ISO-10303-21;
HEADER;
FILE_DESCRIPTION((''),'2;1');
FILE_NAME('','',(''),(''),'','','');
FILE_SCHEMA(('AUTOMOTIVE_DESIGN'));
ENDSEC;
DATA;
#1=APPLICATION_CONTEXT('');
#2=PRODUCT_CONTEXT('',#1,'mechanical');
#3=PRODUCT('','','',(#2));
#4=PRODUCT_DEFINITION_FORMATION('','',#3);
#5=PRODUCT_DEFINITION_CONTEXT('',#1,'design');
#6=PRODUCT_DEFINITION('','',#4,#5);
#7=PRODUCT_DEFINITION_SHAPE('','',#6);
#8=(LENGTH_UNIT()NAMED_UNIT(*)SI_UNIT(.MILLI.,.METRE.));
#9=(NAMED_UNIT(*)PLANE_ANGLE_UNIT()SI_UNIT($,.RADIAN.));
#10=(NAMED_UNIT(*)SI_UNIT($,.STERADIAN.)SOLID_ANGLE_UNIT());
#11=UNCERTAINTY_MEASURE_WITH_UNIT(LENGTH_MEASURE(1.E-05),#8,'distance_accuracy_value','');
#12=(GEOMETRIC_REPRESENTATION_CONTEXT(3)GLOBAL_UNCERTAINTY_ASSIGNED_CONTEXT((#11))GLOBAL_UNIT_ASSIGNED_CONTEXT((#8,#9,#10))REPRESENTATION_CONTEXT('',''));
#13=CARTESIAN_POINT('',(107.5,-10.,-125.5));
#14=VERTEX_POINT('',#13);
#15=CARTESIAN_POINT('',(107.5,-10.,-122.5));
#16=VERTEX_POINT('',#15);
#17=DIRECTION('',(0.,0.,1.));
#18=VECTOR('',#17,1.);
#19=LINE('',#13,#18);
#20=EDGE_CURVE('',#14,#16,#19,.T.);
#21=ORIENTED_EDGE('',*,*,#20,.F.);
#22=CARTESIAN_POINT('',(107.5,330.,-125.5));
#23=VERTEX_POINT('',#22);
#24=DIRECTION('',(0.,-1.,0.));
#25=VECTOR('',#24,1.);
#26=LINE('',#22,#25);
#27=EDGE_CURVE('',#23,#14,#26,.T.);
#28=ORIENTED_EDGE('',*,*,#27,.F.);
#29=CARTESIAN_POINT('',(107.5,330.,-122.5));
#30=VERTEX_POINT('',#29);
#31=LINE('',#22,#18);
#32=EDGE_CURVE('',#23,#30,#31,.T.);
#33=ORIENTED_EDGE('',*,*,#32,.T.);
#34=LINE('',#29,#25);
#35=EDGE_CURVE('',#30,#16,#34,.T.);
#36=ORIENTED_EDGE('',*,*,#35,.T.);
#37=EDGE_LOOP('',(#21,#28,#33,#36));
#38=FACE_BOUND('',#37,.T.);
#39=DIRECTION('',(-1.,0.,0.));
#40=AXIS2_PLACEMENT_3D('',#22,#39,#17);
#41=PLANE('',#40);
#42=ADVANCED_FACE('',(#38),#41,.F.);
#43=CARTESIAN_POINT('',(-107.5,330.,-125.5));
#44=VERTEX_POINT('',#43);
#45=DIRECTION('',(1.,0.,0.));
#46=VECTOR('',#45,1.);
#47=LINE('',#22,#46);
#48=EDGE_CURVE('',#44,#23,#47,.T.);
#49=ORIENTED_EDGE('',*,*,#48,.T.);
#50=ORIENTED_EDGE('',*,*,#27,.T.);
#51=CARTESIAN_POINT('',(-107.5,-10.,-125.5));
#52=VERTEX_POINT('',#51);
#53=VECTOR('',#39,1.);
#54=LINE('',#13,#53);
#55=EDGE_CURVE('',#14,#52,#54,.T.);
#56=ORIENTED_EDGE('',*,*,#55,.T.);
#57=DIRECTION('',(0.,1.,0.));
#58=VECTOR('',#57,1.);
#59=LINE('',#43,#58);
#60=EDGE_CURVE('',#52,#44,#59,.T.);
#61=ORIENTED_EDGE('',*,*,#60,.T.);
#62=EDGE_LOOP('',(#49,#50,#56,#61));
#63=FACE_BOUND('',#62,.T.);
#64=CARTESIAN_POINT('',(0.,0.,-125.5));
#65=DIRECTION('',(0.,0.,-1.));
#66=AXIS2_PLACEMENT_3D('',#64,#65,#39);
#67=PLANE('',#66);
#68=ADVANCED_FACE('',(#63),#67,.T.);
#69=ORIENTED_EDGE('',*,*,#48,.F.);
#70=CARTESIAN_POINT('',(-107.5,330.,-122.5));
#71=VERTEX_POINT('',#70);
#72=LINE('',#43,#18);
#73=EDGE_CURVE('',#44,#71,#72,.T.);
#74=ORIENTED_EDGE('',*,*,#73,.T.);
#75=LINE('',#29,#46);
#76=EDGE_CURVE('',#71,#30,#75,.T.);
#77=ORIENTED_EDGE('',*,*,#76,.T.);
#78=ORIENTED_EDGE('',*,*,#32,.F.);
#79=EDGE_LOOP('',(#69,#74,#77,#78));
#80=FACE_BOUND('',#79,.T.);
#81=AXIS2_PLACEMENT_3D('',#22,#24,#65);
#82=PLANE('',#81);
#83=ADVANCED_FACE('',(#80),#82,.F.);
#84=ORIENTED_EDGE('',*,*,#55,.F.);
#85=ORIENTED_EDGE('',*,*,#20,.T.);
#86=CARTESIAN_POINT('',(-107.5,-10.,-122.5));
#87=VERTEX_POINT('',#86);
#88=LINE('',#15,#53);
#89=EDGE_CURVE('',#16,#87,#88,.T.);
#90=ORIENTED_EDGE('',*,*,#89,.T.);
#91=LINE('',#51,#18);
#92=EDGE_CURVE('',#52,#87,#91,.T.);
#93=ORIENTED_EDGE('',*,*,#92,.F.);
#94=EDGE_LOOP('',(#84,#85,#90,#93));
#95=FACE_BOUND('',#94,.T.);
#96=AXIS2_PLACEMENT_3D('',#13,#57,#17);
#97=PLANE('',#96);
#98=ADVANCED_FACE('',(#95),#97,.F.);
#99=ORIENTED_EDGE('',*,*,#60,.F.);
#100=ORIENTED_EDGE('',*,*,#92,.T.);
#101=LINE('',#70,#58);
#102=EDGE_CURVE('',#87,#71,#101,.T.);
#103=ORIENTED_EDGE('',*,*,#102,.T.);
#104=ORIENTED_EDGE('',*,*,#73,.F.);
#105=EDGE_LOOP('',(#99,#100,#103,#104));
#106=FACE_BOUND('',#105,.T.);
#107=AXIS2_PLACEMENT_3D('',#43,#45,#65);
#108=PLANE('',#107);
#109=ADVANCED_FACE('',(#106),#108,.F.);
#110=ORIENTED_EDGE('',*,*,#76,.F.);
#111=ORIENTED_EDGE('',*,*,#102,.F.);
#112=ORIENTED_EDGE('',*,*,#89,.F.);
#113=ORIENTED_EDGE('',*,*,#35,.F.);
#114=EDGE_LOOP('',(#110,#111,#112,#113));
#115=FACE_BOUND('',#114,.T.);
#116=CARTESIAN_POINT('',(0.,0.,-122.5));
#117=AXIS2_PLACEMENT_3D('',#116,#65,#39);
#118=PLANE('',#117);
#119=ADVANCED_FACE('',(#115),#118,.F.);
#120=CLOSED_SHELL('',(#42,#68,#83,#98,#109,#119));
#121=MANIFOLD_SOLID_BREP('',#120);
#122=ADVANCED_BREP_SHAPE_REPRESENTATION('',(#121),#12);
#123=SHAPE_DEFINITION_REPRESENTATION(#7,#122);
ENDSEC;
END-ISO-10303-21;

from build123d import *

# Parameters (mm, degrees)
SKETCH1_W          = 215
SKETCH1_H          = 340
BASE_FLANGE1_DEPTH = 3


# Sheet-metal steps are written as plain solids
with BuildPart() as part:
    # Sketch1 → Base-Flange1 (new body)
    with BuildSketch(Plane(origin=(0, 0, -122.5), x_dir=(-1, 0, 0), z_dir=(0, 0, -1))):
        with Locations((0, 160)):
            Rectangle(SKETCH1_W, SKETCH1_H)
    extrude(amount=BASE_FLANGE1_DEPTH)


solid = part.part
